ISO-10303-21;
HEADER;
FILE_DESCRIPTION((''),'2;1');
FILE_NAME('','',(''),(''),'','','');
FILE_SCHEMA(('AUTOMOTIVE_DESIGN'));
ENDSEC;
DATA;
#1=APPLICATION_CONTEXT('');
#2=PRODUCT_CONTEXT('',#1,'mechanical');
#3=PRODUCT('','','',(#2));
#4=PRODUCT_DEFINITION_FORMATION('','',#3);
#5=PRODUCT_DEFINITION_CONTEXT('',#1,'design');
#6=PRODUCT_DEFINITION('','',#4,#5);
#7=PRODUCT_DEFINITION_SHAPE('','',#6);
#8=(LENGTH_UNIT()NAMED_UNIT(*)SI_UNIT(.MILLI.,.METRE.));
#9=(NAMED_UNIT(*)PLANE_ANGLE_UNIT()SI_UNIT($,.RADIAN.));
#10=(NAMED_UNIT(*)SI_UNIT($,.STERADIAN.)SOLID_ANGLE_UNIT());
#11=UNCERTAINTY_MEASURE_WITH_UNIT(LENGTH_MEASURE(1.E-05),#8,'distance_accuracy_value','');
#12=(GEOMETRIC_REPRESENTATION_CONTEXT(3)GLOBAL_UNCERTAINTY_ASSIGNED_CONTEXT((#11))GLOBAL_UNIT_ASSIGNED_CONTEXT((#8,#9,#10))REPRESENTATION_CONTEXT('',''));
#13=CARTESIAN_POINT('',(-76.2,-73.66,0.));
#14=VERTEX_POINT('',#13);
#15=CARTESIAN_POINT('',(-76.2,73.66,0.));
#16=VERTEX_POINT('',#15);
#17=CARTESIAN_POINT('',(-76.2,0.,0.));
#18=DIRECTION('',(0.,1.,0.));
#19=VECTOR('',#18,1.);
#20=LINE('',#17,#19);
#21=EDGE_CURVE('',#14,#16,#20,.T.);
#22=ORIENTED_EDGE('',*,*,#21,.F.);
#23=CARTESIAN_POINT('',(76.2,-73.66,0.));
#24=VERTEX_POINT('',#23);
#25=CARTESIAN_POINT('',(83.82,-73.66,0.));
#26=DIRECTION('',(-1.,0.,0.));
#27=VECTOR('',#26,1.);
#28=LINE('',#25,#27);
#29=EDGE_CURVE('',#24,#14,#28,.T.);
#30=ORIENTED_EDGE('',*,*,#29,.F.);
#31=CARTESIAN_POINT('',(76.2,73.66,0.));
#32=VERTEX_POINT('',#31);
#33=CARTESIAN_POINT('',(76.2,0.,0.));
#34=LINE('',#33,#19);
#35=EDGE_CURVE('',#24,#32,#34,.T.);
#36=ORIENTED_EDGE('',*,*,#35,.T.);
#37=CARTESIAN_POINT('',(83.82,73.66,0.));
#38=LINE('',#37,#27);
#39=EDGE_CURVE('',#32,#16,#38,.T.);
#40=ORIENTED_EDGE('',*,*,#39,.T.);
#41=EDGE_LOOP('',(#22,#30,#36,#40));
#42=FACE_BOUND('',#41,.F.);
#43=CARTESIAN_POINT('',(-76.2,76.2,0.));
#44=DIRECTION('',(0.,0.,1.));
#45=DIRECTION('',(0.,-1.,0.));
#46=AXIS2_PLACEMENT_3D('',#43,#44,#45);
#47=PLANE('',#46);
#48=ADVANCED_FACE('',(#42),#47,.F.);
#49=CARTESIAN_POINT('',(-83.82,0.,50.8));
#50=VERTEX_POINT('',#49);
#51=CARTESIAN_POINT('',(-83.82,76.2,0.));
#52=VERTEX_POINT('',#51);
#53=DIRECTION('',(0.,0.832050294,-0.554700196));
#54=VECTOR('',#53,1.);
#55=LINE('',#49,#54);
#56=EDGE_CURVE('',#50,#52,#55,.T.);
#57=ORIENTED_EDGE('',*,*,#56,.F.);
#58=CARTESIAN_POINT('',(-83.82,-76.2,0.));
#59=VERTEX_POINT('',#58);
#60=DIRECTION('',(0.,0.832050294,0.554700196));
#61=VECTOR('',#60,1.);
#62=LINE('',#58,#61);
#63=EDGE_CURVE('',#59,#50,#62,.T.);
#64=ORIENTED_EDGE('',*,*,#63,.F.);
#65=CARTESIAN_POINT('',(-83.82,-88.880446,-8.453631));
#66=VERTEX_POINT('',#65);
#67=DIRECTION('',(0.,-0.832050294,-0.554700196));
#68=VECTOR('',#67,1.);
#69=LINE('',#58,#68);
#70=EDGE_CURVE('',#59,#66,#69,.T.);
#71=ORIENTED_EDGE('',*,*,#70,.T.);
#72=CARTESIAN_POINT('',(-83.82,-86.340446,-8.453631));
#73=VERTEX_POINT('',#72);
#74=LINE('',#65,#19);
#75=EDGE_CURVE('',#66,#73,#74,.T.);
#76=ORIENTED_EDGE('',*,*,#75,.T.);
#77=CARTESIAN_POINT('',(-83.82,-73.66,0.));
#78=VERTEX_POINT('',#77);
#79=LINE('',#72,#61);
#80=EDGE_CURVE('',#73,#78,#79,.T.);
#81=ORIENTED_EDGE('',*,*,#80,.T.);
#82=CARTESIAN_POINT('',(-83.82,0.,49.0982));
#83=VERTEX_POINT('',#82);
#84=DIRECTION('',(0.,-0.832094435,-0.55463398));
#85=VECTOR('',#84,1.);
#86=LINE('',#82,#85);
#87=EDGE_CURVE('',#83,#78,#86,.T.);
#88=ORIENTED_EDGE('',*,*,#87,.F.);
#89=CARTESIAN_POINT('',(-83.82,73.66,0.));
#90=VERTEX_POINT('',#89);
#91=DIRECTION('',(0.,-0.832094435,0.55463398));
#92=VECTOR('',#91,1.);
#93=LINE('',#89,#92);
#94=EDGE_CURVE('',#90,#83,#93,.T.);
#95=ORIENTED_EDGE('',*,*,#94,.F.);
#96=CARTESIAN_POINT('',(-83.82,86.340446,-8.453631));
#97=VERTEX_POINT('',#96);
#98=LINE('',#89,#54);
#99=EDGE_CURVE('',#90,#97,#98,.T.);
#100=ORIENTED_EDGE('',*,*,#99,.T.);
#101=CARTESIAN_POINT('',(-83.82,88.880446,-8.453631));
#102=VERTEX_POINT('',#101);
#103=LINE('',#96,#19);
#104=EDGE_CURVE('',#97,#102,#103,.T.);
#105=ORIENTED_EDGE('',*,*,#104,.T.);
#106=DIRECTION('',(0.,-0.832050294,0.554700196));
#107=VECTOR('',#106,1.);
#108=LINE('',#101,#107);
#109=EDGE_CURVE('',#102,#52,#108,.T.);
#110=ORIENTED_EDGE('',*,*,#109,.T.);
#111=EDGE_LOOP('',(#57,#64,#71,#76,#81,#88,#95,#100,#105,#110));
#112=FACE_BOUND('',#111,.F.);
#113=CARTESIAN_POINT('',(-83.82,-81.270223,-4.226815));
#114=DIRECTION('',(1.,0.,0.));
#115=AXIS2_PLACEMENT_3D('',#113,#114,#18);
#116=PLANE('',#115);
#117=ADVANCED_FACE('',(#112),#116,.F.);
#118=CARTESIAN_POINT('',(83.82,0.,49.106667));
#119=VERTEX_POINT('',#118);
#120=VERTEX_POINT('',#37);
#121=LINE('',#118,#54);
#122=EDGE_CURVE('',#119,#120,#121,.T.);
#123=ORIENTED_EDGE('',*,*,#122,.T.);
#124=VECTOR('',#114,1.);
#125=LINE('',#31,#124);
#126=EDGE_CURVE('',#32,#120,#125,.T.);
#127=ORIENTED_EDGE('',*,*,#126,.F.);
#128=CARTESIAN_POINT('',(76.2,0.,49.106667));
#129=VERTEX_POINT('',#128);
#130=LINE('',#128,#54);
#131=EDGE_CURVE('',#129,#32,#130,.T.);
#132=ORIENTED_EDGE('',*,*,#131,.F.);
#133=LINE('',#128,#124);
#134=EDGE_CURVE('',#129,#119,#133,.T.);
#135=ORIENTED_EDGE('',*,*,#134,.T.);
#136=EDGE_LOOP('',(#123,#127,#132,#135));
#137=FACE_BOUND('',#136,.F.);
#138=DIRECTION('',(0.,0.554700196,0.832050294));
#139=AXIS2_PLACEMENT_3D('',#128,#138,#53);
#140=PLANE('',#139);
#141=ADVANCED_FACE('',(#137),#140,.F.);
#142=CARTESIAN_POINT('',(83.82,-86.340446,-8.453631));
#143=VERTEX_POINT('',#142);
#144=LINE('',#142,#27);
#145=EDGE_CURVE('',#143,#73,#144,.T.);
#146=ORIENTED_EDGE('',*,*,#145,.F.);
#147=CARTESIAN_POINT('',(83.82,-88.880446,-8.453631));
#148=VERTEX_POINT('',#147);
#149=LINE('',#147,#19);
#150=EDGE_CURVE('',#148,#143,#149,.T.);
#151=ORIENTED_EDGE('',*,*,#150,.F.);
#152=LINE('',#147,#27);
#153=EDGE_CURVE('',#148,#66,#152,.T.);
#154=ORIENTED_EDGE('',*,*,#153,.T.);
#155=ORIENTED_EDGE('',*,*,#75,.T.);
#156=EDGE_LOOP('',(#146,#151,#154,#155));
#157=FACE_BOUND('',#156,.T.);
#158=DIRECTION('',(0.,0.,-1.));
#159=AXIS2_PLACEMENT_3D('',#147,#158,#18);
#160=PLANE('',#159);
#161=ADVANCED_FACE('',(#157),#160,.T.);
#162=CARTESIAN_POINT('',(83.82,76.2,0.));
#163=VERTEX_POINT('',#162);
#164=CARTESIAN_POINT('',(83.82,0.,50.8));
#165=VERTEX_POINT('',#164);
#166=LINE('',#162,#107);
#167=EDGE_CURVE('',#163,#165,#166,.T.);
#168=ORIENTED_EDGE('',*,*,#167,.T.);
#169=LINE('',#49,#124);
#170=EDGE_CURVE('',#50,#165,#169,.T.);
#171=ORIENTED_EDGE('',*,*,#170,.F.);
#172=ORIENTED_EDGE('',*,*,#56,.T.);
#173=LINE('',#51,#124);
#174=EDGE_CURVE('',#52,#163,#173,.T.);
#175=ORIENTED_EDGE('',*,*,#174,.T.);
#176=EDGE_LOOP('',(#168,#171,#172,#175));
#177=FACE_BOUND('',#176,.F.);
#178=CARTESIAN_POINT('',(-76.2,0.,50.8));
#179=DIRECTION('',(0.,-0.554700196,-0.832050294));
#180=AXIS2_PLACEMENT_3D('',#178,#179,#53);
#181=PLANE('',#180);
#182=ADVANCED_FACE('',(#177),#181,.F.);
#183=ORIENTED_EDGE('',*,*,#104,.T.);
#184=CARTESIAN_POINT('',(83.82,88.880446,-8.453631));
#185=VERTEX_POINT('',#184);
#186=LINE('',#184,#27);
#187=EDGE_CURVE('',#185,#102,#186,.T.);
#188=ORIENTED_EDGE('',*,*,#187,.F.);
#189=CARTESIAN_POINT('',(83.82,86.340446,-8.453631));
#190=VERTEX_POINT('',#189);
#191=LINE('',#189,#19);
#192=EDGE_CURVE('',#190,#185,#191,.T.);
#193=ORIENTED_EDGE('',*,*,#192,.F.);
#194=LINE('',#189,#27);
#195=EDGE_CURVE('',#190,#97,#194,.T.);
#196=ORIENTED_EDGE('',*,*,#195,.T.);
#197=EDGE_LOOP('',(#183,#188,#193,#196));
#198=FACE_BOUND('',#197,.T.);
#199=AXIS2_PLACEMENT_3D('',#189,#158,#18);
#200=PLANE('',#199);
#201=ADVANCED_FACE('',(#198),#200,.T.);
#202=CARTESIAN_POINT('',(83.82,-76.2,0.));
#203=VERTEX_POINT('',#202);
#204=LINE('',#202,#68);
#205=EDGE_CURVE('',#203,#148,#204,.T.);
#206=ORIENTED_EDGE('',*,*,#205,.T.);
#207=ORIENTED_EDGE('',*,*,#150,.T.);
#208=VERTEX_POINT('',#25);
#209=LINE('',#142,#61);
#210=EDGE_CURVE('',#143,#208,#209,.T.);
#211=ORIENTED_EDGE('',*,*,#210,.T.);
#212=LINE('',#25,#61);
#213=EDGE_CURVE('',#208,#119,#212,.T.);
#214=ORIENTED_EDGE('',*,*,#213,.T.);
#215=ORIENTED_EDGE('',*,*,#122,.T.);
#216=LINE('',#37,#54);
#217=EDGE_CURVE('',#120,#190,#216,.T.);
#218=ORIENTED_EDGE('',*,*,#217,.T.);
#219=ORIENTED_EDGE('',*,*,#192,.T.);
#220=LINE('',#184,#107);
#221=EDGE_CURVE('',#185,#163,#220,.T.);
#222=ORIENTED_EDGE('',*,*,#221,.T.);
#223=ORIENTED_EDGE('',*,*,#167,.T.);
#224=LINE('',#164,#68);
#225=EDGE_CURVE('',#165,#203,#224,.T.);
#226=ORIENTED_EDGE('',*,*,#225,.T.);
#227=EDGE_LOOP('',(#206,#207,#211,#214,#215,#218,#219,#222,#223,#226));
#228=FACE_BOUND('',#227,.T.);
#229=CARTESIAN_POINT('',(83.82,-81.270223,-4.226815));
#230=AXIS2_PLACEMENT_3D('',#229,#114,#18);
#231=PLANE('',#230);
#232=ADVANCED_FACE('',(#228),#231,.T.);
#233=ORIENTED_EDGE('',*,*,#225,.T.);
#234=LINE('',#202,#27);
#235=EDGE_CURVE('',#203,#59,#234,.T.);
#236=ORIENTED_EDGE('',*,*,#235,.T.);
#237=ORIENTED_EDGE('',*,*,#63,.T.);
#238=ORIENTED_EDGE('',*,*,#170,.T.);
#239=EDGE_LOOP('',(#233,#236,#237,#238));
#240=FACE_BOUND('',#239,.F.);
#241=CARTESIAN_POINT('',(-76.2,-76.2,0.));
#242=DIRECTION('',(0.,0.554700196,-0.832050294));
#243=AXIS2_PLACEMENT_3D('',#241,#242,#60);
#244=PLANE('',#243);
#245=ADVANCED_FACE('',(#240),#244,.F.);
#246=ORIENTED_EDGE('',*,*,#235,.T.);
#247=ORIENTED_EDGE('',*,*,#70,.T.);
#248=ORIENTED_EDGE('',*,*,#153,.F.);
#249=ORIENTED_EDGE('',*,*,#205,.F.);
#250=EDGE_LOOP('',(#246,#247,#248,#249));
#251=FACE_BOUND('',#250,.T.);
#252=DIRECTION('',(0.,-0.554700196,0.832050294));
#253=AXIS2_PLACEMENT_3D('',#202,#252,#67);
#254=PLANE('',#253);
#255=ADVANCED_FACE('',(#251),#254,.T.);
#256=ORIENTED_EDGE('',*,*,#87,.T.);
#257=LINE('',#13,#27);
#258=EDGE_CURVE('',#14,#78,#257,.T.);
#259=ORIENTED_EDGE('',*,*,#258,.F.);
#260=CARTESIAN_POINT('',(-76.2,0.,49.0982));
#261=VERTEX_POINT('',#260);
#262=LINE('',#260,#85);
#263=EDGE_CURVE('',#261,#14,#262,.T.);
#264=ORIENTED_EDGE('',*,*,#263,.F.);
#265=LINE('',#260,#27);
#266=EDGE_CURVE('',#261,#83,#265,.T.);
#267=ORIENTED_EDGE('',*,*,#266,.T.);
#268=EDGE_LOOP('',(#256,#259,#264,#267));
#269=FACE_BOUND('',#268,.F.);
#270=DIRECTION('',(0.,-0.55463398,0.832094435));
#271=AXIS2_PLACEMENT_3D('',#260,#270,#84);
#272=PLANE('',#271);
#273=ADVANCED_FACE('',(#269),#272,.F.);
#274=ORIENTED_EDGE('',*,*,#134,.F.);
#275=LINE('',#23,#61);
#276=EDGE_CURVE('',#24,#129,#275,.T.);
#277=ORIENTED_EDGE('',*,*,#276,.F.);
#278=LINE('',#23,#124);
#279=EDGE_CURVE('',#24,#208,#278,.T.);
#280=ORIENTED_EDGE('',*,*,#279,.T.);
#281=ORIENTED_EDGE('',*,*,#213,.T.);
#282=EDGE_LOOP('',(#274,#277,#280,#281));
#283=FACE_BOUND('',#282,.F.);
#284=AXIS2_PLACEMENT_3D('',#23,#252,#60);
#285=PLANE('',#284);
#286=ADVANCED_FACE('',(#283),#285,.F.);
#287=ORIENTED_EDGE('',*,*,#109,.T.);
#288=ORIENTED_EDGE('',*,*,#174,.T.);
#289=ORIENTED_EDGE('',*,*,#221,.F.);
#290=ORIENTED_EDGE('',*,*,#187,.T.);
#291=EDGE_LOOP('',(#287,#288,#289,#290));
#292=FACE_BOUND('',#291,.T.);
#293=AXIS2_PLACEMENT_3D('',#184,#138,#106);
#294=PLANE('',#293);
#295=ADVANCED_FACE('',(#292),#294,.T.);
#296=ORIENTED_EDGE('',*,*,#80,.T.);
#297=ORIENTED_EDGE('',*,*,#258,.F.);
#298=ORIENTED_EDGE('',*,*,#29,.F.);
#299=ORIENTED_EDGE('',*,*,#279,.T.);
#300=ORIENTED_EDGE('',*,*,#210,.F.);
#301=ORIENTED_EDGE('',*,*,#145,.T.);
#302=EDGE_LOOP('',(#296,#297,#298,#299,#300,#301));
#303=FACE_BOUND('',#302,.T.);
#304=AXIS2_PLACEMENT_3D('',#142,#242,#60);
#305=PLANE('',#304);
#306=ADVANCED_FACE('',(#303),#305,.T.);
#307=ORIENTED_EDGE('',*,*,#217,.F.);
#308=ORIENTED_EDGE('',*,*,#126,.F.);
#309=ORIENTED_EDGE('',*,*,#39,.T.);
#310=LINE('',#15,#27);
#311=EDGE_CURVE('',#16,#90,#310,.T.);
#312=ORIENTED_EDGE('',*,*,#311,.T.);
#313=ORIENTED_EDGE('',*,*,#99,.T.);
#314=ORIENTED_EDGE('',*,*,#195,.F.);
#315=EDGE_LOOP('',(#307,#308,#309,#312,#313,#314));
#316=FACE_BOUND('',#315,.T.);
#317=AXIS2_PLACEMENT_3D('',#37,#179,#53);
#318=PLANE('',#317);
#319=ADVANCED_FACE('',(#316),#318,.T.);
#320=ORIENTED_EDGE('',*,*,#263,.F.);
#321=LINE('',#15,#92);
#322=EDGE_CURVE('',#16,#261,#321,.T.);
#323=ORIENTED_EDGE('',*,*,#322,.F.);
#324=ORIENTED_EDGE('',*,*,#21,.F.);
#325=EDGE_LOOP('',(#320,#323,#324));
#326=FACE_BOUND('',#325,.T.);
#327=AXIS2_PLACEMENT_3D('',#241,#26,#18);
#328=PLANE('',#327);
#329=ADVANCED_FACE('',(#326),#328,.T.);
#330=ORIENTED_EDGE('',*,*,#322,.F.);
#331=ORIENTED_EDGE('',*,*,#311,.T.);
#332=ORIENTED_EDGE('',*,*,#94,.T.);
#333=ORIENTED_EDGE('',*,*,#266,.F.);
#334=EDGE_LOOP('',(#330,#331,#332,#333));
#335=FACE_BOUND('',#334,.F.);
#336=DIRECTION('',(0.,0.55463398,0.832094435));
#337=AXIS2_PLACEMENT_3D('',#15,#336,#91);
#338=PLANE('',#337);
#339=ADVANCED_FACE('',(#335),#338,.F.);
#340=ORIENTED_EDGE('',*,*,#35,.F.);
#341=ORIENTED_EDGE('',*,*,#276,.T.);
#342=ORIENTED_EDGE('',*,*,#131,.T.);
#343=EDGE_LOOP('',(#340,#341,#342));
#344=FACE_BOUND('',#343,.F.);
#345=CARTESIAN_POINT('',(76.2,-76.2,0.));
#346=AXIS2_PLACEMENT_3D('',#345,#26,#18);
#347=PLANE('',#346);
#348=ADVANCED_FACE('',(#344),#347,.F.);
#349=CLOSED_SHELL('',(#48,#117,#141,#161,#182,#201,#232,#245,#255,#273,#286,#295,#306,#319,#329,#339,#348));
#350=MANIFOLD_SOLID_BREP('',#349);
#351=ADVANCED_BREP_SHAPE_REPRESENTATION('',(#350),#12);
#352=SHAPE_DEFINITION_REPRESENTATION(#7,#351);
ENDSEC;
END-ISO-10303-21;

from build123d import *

# Parameters (mm, degrees)
F0_W     = 152.4
F0_H     = 152.4
F1_DEPTH = 50.8
F3_DEPTH = 152.401
F5_DEPTH = 7.62
F7_DEPTH = 7.62
F9_DEPTH = 167.64


with BuildPart() as f1:
    # F0 (on Top) → F1 (new body)
    with BuildSketch(Plane.XY):
        Rectangle(F0_W, F0_H)
    extrude(amount=F1_DEPTH)

    # F2 (on face) → F3 (cut, through all)
    with BuildSketch(Plane(origin=(-76.2, 0, 0), x_dir=(0, -1, 0), z_dir=(-1, 0, 0))):
        Polygon((76.2, 50.8), (0, 50.8), (76.2, 0), align=None)
        Polygon((-76.2, 0), (0, 50.8), (-76.2, 50.8), align=None)
    extrude(amount=-F3_DEPTH, mode=Mode.SUBTRACT)

    # F4 (on face) → F5 (join)
    with BuildSketch(Plane.YZ.offset(76.2)):
        Polygon((-76.2, 0), (-73.66, 0), (0, 49.1066666667), (73.66, 0), (76.2, 0), (0, 50.8), align=None)
    extrude(amount=F5_DEPTH)

    # F6 (on face) → F7 (join)
    with BuildSketch(Plane(origin=(-76.2, 0, 0), x_dir=(0, -1, 0), z_dir=(-1, 0, 0))):
        Polygon((-76.2, 0), (-73.66, 0), (0, 49.0982), (73.66, 0), (76.2, 0), (0, 50.8), align=None)
    extrude(amount=F7_DEPTH)

    # F8 (on face) → F9 (join)
    with BuildSketch(Plane.YZ.offset(83.82)):
        Polygon((-86.3404464857, -8.4536309905), (-73.66, 0), (-76.2, 0), (-88.8804464857, -8.4536309905), align=None)
        Polygon((76.2, 0), (73.66, 0), (86.3404464857, -8.4536309905), (88.8804464857, -8.4536309905), align=None)
    extrude(amount=-F9_DEPTH)


solid = f1.part
